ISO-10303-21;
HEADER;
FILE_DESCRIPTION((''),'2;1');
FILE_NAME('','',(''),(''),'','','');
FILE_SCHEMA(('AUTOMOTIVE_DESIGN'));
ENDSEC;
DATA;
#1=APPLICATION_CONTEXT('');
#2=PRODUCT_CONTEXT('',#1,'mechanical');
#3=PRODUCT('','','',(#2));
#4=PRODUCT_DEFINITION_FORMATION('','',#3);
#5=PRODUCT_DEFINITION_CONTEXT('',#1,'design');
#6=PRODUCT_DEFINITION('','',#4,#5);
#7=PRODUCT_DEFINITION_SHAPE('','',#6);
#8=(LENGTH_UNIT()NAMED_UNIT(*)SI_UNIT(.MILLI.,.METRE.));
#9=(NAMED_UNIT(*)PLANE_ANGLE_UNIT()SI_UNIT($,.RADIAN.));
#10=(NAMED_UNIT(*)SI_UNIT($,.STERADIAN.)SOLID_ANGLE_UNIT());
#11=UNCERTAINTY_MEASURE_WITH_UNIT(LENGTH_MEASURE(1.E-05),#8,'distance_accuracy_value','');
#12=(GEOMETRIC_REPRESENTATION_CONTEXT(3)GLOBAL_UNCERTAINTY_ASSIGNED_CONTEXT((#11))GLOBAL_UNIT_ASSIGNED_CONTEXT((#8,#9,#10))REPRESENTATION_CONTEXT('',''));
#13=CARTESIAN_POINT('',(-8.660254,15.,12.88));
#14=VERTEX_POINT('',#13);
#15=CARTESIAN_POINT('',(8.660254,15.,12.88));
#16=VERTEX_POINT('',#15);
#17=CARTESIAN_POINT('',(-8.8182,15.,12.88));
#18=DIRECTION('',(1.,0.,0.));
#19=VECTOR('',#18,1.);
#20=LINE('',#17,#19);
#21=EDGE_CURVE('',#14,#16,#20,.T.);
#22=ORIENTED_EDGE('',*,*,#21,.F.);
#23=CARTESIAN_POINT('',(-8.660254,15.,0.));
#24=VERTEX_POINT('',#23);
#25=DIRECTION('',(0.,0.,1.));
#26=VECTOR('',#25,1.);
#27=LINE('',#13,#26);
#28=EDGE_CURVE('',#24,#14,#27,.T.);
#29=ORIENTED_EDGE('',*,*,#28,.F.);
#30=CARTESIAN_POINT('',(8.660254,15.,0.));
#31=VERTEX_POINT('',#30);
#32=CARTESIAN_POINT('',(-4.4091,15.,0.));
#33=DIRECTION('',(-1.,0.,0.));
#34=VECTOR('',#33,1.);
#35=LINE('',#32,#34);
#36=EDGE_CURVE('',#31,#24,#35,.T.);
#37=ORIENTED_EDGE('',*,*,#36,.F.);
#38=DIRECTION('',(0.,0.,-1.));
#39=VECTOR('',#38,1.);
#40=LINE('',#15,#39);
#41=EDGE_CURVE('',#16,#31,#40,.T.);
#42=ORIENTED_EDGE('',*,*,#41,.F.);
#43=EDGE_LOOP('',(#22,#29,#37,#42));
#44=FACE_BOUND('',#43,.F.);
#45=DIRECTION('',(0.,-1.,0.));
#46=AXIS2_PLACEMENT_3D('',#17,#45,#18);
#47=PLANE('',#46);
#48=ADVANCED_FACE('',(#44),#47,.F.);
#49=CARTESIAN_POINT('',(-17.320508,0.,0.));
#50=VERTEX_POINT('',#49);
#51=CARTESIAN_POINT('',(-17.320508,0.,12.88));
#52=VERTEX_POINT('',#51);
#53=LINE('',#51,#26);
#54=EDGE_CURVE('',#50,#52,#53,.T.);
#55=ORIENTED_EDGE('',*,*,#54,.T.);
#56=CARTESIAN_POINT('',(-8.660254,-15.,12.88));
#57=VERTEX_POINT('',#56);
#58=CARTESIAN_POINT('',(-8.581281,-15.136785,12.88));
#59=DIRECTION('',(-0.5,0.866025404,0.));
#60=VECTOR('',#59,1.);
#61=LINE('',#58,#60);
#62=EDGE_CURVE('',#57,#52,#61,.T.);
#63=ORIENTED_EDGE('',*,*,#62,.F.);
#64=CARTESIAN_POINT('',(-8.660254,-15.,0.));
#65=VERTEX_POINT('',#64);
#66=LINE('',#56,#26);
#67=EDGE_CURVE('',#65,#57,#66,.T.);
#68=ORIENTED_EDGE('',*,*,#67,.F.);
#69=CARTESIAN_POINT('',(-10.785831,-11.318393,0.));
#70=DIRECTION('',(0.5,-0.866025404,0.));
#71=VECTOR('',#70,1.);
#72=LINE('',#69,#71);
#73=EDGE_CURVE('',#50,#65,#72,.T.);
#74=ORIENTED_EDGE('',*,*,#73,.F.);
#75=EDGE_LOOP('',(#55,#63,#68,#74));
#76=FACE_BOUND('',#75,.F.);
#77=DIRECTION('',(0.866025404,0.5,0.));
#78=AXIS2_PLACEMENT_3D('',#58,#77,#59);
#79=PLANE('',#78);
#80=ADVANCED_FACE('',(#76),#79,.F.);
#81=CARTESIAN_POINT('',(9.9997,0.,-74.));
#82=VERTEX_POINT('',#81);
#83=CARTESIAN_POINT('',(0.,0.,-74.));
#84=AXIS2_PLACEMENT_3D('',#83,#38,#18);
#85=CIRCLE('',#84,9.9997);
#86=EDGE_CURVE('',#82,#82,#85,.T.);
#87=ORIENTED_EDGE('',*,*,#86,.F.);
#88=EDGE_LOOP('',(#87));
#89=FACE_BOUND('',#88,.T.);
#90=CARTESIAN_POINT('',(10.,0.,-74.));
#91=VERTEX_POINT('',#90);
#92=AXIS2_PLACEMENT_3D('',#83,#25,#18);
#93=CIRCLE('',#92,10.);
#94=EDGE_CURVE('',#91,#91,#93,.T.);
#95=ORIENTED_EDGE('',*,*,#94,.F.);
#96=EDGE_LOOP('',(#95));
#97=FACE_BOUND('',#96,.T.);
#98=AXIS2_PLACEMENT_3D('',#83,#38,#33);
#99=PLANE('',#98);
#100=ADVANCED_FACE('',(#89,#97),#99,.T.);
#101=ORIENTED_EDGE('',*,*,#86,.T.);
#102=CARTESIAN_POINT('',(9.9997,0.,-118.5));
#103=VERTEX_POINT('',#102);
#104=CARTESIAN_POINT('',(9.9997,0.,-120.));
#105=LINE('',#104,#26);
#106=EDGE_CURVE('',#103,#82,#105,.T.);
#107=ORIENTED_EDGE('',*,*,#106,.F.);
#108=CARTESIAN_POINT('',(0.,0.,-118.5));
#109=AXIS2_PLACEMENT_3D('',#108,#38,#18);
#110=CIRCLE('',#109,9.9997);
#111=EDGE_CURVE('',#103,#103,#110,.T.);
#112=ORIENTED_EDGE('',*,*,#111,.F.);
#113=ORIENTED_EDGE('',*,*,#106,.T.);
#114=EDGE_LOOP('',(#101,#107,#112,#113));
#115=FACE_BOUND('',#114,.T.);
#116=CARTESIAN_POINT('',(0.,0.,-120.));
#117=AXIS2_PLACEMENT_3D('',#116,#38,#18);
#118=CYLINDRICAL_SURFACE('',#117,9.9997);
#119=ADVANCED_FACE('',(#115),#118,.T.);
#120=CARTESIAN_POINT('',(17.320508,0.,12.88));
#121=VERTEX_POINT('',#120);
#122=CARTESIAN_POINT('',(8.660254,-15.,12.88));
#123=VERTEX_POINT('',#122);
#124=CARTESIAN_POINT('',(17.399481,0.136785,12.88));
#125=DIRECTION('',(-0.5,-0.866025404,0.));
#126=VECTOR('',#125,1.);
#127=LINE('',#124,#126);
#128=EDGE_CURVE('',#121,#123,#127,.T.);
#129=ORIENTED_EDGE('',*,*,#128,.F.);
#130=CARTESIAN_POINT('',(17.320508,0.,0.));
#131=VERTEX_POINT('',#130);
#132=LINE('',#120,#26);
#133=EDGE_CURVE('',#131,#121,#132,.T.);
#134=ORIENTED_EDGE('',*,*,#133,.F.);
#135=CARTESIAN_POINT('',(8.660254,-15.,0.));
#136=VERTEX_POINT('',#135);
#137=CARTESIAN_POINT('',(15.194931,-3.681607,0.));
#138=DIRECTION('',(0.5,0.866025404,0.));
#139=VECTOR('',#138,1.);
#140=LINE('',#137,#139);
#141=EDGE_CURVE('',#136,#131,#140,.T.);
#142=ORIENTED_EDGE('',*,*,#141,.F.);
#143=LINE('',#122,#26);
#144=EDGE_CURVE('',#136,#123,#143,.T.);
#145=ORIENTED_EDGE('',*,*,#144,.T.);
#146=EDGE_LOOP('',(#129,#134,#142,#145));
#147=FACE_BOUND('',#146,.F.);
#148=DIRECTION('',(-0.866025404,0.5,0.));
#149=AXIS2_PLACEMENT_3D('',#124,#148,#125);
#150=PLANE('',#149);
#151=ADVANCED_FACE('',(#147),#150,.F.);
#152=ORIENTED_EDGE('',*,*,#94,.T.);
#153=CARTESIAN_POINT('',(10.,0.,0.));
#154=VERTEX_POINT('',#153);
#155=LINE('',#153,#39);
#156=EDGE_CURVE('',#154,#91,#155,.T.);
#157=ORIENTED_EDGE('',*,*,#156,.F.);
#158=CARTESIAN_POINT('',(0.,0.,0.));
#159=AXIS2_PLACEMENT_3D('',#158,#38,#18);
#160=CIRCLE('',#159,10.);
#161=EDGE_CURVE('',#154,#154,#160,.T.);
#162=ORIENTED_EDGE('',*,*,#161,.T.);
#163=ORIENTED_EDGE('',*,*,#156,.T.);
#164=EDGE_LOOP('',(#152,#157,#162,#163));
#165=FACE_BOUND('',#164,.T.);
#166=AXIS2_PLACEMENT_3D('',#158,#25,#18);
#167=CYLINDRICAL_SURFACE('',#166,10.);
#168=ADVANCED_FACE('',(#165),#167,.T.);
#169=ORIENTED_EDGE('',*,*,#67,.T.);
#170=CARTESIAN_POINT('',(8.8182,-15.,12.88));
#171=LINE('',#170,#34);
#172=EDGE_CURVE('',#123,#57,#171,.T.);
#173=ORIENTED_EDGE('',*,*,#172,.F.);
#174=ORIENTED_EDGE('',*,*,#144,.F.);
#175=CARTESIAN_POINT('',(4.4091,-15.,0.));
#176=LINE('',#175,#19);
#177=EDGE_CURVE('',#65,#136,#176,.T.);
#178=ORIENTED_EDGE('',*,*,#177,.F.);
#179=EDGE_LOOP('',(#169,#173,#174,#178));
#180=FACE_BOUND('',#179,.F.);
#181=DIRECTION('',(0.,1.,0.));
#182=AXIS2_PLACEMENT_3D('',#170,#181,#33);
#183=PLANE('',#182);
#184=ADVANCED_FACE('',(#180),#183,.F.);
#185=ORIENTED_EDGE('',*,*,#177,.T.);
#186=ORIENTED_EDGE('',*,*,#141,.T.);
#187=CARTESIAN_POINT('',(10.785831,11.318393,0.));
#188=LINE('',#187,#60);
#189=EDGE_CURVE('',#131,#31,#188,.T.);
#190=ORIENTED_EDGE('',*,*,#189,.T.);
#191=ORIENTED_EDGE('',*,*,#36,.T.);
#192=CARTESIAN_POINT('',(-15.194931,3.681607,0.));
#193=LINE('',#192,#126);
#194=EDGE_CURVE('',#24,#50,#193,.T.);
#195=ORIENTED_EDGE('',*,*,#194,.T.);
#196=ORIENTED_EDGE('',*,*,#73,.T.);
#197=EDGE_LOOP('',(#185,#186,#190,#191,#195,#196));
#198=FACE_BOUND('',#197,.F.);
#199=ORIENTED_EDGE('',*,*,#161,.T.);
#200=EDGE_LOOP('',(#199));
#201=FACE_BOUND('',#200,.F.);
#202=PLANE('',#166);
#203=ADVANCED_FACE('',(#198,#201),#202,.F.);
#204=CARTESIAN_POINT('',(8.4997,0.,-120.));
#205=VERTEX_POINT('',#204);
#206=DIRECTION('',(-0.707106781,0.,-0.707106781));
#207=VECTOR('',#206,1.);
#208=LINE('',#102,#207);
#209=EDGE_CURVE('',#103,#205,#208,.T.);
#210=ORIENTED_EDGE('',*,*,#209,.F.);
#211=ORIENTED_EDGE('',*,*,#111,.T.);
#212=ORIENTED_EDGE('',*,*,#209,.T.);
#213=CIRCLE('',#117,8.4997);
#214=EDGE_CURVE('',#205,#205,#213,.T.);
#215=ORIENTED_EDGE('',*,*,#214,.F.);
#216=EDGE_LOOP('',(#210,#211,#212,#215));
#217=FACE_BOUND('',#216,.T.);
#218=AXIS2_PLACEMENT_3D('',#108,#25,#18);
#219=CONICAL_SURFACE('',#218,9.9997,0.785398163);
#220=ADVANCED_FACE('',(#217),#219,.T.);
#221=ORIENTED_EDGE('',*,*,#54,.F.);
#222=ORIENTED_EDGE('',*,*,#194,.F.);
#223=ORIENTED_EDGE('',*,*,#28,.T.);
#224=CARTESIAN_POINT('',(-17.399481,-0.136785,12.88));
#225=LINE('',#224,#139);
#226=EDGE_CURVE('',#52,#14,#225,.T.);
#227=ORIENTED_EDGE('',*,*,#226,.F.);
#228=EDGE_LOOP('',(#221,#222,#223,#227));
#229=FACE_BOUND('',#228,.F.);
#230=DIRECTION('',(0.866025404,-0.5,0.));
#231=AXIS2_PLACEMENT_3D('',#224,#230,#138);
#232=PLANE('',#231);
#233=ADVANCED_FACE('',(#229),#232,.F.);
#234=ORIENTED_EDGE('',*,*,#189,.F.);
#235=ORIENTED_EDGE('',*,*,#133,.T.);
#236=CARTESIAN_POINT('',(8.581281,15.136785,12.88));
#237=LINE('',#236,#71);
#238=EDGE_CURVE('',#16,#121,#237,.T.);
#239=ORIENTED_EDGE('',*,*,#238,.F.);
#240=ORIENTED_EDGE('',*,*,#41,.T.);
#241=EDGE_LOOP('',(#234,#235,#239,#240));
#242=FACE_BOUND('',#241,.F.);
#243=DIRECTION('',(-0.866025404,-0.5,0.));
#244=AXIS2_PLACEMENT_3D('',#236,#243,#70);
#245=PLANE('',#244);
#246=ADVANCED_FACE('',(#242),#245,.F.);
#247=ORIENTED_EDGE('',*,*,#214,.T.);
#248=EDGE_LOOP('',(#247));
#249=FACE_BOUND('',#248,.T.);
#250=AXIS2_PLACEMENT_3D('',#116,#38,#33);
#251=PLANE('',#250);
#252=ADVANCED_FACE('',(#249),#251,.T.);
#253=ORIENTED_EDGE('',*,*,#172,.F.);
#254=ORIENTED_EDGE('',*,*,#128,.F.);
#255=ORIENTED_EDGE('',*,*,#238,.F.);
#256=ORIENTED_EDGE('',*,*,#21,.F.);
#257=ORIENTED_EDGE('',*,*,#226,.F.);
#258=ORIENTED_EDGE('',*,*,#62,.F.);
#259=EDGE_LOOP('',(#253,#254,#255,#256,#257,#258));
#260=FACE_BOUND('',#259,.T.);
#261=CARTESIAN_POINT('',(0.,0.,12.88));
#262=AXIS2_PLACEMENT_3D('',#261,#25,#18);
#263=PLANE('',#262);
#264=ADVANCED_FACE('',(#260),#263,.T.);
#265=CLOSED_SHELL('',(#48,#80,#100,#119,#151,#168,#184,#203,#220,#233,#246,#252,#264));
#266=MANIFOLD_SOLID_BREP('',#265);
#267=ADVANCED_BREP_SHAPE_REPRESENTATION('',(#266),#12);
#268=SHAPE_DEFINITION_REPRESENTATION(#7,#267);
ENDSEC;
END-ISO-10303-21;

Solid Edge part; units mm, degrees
sketch "Sketch1" plane through (0, 0, 0) normal (0, 0, 1) x (1, 0, 0)
  circle A0 centre (0, 0) radius 17.4
  dimension "D1" = 34.8
extrude "Protrusion1" add sketch "Sketch1" along normal blind 12.88
sketch "Sketch2" plane through (0, 0, 0) normal (0, 0, -1) x (1, 0, 0)
  circle A0 centre (0, 0) radius 10
extrude "Protrusion2" add sketch "Sketch2" along normal blind 120
sketch "Sketch3" plane through (0, 0, -120) normal (0, 0, -1) x (1, 0, 0)
  circle A0 centre (0, 0) radius 9.9997
extrude "Cutout1" cut sketch "Sketch3" against normal blind 46 flip side to cut
chamfer "Chamfer_1" distance 1.5 angle 45 1 edges at (-9.9997, 0, -120)
sketch "Sketch4" plane through (0, 0, 12.88) normal (0, 0, 1) x (1, 0, 0)
  line L0 (-8.8182, 15) -> (8.8182, 15)
  dimension "D1" = 30
extrude "Cutout2" cut sketch "Sketch4" against normal up to next material side at (0, 15.05, 12.88)
pattern_circular "Pattern1" count 6 over 360 about axis through (0, 0, 12.88) along (0, 0, 1) of "Cutout2"
properties part number "300542"
